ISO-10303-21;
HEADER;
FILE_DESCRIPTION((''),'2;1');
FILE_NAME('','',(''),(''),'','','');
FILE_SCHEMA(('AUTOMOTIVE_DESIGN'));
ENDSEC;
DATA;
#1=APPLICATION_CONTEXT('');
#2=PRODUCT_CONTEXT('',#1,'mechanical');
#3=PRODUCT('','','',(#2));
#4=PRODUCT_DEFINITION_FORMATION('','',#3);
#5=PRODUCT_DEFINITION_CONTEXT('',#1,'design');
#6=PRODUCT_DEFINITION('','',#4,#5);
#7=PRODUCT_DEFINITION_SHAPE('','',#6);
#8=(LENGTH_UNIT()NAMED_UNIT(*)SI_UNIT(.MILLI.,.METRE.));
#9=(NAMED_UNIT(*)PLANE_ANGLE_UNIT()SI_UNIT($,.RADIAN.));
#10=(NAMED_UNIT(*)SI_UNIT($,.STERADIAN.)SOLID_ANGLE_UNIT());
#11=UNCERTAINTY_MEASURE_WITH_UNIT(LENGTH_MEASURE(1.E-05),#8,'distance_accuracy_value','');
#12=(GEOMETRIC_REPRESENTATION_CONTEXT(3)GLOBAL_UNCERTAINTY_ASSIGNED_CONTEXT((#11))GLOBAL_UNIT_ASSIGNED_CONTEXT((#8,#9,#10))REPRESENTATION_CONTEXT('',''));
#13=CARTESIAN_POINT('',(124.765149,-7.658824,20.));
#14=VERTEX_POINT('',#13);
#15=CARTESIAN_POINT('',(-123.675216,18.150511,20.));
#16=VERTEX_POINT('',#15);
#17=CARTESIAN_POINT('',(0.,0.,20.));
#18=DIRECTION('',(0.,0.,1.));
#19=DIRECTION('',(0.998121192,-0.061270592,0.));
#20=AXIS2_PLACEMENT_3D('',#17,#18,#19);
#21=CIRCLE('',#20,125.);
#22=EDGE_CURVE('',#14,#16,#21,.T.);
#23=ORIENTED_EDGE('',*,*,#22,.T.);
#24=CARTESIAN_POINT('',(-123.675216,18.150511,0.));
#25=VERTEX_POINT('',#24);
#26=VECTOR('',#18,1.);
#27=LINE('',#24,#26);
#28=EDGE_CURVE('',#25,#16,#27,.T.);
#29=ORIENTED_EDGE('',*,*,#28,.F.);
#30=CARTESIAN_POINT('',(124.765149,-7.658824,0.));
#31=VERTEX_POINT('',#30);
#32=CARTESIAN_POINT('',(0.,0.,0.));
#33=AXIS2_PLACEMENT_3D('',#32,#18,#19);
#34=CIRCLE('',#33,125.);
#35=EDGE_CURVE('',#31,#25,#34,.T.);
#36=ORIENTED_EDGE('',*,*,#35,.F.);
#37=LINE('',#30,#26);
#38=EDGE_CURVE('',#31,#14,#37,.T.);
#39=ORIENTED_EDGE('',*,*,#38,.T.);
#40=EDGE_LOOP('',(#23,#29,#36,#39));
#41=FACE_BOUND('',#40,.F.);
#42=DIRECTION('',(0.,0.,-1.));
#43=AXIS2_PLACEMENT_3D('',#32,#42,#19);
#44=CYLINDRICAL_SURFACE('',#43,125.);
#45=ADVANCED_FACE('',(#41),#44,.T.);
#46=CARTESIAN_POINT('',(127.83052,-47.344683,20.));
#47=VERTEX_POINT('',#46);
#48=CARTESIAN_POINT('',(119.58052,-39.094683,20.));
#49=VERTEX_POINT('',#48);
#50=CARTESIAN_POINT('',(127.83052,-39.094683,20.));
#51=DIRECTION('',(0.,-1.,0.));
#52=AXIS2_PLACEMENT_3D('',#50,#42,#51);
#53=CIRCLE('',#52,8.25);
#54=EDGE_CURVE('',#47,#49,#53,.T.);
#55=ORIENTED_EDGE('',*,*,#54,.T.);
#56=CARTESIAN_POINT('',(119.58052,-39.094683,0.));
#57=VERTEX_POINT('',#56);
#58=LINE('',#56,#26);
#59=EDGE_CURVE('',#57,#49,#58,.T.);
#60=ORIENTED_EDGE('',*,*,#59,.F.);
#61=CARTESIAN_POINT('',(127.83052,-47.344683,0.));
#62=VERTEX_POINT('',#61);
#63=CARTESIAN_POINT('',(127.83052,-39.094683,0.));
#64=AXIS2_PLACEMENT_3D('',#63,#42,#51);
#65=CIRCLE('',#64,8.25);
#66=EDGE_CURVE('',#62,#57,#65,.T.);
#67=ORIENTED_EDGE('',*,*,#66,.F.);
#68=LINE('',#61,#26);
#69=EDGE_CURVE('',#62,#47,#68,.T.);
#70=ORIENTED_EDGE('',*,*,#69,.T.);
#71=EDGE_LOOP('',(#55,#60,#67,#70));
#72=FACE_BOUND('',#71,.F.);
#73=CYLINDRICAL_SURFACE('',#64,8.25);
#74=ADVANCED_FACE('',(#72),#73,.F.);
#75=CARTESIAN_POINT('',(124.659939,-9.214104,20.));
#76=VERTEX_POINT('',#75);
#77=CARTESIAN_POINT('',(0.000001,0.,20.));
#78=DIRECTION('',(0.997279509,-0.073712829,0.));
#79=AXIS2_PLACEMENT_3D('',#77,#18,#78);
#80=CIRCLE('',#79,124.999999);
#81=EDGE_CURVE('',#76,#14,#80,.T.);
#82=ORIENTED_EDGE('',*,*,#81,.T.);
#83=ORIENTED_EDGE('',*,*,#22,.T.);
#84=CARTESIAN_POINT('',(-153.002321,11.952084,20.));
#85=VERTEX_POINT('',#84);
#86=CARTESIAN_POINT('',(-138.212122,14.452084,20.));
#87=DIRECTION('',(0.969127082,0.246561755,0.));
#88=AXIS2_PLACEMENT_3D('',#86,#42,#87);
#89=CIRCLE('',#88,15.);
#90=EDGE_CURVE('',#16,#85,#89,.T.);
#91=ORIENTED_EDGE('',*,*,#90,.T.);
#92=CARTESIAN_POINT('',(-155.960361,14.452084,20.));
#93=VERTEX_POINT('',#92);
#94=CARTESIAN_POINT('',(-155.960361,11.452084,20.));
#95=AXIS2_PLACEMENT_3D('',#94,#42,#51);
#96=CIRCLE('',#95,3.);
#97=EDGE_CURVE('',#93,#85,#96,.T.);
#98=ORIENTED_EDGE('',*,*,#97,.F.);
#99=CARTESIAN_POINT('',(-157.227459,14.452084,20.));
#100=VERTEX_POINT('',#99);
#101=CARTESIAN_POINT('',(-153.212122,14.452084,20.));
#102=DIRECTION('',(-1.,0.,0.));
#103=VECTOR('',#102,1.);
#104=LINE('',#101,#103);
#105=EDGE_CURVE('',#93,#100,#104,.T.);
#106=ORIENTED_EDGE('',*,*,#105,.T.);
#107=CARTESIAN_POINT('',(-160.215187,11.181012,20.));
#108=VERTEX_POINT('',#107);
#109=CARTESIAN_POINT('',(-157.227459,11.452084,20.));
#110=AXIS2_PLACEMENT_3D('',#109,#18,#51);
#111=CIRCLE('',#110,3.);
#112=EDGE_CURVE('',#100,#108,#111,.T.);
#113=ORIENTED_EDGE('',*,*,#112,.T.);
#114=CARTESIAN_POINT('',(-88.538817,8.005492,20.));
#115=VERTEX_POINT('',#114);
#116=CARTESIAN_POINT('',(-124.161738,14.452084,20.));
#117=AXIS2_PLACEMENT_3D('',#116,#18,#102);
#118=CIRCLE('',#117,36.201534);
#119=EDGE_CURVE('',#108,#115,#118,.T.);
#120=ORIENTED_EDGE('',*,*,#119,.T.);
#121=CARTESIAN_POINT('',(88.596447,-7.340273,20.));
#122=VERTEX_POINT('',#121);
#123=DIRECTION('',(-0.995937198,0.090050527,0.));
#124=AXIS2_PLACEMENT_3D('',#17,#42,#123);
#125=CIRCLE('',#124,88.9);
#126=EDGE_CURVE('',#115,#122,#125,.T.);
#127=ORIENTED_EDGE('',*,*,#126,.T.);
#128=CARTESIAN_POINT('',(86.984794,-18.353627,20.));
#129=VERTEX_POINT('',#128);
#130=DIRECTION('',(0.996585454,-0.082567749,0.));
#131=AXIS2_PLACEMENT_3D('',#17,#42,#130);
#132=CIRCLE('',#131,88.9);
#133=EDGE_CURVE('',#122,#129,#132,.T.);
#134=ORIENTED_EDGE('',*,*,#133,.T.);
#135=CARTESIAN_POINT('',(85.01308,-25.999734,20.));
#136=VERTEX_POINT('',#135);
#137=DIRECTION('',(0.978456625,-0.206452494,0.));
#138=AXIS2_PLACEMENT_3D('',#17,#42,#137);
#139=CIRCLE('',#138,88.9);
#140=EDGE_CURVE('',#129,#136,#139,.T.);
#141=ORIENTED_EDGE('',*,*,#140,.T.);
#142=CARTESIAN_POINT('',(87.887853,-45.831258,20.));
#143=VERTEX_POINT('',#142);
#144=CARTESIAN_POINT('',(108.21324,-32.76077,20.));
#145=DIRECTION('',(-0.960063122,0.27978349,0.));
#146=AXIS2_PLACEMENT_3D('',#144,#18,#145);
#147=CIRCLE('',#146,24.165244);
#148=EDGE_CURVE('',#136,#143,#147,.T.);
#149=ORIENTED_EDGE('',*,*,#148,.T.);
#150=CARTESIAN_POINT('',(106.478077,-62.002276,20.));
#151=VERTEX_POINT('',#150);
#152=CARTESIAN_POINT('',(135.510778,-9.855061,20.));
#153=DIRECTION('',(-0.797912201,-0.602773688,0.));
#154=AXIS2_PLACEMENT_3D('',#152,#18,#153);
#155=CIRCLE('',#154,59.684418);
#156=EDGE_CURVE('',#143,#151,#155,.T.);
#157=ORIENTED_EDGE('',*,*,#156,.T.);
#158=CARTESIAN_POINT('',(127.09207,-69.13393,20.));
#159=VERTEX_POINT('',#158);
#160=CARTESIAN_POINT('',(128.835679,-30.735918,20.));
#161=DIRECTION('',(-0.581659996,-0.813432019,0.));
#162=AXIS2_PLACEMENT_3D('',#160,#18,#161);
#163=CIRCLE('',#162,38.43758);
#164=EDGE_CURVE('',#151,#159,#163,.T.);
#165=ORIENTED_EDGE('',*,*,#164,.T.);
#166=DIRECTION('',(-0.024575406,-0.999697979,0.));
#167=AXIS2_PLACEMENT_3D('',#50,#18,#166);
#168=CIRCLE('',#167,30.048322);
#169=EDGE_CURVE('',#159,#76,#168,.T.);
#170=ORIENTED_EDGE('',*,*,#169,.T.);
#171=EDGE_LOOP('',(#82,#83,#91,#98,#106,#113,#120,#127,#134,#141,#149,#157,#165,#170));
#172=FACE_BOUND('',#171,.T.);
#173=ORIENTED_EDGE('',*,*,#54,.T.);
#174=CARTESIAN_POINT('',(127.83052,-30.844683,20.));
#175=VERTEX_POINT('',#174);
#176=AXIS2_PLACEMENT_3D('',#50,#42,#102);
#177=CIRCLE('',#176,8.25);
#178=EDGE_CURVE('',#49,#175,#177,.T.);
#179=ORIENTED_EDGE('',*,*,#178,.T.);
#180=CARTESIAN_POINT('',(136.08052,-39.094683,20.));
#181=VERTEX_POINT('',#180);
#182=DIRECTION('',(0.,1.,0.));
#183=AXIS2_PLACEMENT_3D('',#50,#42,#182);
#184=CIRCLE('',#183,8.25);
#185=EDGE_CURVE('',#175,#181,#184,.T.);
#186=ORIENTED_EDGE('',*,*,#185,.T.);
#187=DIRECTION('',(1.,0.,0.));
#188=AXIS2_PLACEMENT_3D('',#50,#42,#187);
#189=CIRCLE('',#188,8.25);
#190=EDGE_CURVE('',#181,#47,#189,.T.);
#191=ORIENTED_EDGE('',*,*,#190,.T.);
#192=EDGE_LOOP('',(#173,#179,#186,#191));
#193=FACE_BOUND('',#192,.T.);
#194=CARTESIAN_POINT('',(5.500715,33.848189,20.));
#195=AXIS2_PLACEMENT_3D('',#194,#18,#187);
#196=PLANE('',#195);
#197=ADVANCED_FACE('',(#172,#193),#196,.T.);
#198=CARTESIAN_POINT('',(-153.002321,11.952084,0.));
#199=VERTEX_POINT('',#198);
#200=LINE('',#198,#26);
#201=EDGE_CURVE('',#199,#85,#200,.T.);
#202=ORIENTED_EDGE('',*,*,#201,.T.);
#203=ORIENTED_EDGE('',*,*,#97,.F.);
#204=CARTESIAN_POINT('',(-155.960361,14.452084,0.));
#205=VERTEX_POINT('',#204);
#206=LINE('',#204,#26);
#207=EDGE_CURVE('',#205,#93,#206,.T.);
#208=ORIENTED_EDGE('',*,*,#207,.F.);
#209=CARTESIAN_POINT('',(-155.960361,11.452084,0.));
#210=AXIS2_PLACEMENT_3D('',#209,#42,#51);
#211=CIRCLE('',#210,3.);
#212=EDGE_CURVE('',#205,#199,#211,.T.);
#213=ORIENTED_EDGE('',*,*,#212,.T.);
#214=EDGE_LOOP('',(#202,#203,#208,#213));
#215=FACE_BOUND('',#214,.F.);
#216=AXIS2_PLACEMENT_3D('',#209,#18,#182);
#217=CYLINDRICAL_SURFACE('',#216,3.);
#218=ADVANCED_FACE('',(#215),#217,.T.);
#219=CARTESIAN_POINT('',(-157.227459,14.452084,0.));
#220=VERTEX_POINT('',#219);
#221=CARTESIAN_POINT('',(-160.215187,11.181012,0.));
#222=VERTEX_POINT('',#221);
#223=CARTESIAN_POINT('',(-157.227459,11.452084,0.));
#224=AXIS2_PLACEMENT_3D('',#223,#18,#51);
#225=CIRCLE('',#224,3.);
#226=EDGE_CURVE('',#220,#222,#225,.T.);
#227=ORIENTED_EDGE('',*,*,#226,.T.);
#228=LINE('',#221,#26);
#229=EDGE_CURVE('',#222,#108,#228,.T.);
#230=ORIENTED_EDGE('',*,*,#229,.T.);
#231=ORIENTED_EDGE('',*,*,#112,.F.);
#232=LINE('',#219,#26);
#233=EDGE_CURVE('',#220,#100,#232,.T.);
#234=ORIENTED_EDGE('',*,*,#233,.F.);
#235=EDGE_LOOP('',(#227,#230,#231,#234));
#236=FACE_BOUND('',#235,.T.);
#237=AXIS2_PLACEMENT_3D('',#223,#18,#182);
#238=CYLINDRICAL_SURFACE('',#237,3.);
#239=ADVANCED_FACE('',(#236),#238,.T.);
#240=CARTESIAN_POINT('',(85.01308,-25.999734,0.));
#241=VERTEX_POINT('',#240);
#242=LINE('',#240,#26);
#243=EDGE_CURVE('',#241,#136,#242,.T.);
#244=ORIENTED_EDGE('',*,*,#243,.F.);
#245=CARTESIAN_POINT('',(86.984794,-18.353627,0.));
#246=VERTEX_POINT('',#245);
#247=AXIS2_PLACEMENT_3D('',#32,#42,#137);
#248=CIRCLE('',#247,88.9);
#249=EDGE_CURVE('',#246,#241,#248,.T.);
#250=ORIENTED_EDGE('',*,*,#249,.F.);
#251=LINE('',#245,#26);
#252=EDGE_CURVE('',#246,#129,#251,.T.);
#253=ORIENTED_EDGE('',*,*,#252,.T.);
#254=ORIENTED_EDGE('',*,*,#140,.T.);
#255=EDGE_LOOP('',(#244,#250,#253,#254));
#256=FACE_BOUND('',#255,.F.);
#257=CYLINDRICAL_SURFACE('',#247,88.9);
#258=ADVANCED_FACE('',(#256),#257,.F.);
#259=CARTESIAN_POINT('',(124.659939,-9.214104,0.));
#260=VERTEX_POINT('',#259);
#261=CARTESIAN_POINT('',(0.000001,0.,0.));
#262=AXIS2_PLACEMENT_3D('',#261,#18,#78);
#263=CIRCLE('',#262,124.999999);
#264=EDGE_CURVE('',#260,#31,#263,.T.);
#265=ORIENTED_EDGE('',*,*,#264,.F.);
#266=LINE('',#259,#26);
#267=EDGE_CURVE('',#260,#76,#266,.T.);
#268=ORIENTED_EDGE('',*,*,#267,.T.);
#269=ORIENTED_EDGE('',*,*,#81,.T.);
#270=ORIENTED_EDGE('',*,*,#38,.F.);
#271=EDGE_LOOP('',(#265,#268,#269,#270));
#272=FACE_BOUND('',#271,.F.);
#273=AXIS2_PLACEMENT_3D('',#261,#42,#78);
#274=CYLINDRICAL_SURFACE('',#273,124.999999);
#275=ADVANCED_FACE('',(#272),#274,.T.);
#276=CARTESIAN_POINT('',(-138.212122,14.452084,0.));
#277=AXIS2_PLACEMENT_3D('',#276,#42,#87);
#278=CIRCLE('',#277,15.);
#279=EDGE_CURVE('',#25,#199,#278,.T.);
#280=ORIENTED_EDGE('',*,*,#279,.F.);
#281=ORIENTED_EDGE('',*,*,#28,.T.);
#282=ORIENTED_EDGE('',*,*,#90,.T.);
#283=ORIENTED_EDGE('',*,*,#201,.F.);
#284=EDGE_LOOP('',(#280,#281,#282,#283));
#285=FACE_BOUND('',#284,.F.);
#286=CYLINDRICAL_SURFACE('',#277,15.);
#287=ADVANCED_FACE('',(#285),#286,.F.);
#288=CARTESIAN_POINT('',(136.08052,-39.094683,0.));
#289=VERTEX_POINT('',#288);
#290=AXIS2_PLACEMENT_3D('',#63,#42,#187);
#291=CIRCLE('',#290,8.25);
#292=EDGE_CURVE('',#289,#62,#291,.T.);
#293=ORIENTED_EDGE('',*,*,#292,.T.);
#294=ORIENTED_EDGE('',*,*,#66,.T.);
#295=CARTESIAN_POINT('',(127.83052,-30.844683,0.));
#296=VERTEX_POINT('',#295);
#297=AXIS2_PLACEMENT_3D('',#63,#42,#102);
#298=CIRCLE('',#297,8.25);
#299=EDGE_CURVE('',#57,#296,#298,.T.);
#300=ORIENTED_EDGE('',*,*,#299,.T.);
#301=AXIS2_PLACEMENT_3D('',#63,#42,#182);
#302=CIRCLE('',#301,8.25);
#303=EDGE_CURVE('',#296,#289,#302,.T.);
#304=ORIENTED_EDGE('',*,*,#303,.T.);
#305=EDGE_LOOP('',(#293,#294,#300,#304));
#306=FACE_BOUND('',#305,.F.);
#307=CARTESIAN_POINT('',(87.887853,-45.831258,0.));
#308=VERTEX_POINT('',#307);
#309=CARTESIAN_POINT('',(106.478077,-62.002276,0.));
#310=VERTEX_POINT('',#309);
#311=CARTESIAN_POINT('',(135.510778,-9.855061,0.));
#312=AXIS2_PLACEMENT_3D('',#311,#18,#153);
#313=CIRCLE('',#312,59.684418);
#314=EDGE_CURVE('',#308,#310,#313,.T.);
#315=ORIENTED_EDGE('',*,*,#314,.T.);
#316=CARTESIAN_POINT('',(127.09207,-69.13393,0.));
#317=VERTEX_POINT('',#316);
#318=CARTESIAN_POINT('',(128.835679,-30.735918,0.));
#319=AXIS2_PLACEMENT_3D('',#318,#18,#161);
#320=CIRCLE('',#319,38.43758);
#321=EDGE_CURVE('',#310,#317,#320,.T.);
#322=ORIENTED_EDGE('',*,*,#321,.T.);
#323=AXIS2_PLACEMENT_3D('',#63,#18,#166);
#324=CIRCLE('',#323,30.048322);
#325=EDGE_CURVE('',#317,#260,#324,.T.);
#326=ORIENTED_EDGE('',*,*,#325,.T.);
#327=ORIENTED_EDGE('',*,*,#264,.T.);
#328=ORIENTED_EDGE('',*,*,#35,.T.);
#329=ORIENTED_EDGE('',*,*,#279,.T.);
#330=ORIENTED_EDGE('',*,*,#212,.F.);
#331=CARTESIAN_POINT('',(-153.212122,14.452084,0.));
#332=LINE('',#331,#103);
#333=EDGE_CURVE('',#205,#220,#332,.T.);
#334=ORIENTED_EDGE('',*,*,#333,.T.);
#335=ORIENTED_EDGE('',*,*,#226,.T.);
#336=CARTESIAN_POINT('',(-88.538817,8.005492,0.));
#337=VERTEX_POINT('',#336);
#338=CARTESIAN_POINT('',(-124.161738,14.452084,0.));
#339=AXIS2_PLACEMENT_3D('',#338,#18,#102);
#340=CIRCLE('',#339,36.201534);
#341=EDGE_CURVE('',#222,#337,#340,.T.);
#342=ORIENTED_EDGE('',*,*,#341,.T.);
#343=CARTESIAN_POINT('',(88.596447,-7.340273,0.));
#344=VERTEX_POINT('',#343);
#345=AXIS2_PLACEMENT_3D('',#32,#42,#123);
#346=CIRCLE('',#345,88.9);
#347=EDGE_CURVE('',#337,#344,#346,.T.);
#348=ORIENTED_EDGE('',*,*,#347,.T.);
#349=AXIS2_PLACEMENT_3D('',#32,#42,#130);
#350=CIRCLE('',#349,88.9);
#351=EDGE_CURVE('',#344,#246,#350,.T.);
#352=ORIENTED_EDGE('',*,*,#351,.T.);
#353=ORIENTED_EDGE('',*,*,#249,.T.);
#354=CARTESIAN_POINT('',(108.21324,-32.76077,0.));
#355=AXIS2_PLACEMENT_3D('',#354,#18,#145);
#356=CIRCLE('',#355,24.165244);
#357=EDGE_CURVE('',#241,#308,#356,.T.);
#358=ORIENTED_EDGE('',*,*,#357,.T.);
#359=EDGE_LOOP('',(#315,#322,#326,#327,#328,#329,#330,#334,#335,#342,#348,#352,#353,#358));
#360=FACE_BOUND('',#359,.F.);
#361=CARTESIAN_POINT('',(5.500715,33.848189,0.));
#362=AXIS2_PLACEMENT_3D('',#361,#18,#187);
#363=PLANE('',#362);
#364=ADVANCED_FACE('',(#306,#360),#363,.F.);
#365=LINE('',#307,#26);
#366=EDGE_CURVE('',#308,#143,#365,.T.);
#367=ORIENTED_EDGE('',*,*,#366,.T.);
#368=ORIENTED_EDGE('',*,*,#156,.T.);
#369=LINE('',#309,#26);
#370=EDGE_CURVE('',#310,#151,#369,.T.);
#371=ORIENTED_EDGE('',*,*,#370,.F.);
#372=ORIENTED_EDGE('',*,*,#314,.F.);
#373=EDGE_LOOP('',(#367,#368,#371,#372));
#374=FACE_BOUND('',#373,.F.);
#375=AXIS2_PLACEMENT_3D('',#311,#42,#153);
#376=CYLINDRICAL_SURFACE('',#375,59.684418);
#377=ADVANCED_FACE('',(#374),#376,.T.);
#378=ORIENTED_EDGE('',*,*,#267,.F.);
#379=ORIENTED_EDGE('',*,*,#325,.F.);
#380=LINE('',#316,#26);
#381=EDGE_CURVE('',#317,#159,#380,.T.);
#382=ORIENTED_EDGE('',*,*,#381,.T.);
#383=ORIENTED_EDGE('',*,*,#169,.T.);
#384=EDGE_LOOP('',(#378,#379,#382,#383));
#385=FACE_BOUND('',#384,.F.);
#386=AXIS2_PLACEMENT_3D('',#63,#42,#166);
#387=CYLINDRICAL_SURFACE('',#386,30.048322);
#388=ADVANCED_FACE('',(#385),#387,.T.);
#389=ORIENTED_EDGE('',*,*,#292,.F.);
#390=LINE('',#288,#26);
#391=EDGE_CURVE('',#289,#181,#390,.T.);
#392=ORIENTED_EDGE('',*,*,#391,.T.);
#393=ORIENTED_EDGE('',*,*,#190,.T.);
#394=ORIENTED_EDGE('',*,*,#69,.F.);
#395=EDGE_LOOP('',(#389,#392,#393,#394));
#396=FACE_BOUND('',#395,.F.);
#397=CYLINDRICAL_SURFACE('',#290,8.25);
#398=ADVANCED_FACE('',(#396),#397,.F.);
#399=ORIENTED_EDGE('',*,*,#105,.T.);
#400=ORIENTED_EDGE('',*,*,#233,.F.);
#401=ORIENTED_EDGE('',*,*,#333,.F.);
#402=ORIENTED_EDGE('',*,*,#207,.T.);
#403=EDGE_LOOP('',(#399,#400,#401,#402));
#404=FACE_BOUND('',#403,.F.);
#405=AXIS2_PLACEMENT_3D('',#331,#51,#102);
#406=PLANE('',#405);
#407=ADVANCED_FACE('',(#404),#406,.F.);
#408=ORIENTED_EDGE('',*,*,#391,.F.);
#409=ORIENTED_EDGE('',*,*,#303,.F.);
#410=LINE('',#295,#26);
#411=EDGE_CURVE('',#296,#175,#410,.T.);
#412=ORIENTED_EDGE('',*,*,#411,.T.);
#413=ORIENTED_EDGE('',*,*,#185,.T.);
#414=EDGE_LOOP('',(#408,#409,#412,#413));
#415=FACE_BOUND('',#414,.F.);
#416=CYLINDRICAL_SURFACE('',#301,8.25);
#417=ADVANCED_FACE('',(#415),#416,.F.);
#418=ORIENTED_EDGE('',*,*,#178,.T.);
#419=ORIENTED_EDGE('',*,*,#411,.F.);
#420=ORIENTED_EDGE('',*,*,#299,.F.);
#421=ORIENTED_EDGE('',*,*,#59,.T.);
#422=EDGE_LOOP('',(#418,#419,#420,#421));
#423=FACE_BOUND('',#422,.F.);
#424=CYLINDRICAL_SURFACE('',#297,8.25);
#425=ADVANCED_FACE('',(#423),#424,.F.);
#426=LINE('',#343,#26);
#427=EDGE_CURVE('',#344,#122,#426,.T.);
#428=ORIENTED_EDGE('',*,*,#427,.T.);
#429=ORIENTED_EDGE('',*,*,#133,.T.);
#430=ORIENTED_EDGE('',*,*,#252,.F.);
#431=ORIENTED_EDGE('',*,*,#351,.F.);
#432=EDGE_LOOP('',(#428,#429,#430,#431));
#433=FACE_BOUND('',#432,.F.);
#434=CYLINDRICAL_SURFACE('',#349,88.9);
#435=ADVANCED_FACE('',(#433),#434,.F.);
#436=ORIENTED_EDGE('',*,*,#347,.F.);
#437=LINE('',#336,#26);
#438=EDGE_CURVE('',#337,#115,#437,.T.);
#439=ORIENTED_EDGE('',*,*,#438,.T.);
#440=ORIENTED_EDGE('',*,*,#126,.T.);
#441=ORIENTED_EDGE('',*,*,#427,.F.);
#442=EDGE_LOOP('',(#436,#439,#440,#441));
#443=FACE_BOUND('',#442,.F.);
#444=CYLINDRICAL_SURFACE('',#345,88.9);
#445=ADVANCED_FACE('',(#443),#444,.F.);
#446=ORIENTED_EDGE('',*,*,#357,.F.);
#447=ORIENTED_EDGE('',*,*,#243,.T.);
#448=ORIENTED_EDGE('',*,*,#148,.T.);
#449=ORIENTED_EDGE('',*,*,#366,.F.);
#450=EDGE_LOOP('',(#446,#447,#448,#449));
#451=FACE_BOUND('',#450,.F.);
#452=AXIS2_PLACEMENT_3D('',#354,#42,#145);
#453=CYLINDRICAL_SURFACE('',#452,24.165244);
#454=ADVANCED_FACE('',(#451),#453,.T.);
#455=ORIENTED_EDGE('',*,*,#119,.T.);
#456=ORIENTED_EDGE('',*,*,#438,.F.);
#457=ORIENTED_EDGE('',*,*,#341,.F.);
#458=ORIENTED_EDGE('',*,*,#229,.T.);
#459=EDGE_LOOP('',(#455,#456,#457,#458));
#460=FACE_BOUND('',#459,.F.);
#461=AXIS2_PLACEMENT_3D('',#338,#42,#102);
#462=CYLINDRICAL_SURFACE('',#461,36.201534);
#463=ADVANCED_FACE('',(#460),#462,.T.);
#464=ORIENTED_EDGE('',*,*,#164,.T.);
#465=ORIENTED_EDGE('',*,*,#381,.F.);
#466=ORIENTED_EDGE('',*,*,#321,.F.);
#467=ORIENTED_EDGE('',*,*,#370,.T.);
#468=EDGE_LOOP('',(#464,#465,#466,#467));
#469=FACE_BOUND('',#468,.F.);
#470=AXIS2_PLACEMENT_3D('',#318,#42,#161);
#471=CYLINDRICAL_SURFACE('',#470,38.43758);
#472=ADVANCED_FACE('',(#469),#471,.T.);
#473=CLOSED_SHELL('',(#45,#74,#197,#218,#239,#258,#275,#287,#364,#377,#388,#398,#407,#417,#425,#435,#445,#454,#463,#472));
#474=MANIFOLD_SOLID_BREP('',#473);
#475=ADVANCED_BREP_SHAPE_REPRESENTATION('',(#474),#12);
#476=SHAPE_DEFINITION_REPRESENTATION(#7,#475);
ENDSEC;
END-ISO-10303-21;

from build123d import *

# Parameters (mm, degrees)
F1_DEPTH = 20
F2_R     = 3


# Not quite as in the source:
# - a feature names something its author has since deleted; it is built from what else it names


with BuildPart() as f1:
    # F0 (on Top) → F1 (new body)
    with BuildSketch(Plane.XY):
        with BuildLine():
            Line((-153.2121218782, 14.4520842503), (-160.3632725747, 14.4520842503))
            ThreePointArc((-160.3632725747, 14.4520842503), (-127.3979918157, -21.6045066339), (-88.538816916, 8.0054918097))
            ThreePointArc((-88.538816916, 8.0054918097), (7.672936475, 88.5682564232), (88.5964468438, -7.3402729282))
            ThreePointArc((88.5964468438, -7.3402729282), (87.9631543537, -12.872197798), (86.984793992, -18.3536267309))
            ThreePointArc((86.984793992, -18.3536267309), (86.0838715562, -22.1985823397), (85.013080464, -25.9997336529))
            ThreePointArc((85.013080464, -25.9997336529), (84.2979595084, -36.2275225271), (87.887852798, -45.8312577069))
            ThreePointArc((87.887852798, -45.8312577069), (96.3394016955, -54.8865279313), (106.4780767567, -62.0022756507))
            ThreePointArc((106.4780767567, -62.0022756507), (116.2685705091, -67.06105094), (127.0920702884, -69.1339300658))
            ThreePointArc((127.0920702884, -69.1339300658), (157.854119606, -37.8760326334), (124.6599386157, -9.2141035549))
            ThreePointArc((124.6599386157, -9.2141035549), (124.7149682754, -8.4366277665), (124.7651490421, -7.6588239637))
            ThreePointArc((124.7651490421, -7.6588239637), (12.9161691706, 124.330899514), (-123.675215649, 18.1505105758))
            ThreePointArc((-123.675215649, 18.1505105758), (-136.3484686697, -0.431692042), (-153.2121218782, 14.4520842503))
        make_face()
        with BuildLine():
            ThreePointArc((127.83052, -30.8446834837), (133.6641509448, -33.2610525389), (136.08052, -39.0946834837))
            ThreePointArc((136.08052, -39.0946834837), (133.6641509448, -44.9283144285), (127.83052, -47.3446834837))
            ThreePointArc((127.83052, -47.3446834837), (121.9968890552, -44.9283144285), (119.58052, -39.0946834837))
            ThreePointArc((119.58052, -39.0946834837), (121.9968890552, -33.2610525389), (127.83052, -30.8446834837))
        make_face(mode=Mode.SUBTRACT)
    extrude(amount=F1_DEPTH)

    # F2
    f2_edges = [f1.edges().sort_by_distance(p)[0] for p in [
        (-160.363273, 14.452084, 10),
        (-153.212122, 14.452084, 10),
    ]]
    fillet(f2_edges, radius=F2_R)


solid = f1.part
